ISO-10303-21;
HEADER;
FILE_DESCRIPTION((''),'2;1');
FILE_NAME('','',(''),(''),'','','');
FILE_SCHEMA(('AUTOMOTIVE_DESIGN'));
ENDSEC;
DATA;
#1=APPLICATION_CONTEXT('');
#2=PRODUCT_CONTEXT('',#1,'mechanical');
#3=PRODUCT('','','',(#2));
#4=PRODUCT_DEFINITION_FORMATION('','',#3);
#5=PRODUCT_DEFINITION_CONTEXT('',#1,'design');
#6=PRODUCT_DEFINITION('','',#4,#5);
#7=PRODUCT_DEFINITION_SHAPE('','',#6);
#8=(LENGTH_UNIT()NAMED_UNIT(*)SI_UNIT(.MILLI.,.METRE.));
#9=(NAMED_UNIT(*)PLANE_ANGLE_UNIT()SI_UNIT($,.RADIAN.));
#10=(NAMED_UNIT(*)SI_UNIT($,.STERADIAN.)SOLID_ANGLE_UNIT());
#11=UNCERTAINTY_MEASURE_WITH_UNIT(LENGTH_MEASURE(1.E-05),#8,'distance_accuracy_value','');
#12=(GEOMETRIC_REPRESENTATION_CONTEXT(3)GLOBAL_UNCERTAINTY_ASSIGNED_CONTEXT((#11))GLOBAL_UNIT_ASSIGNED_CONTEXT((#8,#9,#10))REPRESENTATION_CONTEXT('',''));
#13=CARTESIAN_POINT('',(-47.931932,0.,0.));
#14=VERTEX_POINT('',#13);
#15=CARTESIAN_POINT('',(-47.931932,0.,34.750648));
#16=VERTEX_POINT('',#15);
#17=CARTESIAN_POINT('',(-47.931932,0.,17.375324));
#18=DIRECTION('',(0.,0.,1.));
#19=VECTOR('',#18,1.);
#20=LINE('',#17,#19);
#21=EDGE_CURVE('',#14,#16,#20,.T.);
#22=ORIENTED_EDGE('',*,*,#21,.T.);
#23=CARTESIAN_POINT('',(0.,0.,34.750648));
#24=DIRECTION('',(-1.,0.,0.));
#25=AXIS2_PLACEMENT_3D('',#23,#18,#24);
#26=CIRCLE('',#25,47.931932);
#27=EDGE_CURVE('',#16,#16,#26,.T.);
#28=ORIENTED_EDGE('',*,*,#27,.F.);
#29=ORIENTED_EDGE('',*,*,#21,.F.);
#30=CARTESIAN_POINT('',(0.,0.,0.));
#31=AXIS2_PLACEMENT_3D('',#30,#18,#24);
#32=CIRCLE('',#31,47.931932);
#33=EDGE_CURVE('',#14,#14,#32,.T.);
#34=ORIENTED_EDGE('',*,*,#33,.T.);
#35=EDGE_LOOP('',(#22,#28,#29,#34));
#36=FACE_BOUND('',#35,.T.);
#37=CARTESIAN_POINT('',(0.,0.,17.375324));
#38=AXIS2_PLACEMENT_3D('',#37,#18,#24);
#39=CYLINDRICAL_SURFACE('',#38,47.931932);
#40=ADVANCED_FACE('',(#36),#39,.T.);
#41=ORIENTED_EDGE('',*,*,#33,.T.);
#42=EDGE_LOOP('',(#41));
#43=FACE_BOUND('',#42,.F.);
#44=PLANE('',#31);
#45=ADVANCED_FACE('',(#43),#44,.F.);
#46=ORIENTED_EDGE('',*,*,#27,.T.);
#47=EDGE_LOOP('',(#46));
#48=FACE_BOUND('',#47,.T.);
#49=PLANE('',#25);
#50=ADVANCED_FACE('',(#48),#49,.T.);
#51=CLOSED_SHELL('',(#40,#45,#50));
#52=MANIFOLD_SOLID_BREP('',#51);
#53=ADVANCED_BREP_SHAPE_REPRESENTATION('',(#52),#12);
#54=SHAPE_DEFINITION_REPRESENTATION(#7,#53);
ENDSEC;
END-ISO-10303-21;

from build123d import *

# Parameters (mm, degrees)
F0_W = 47.9319319129
F0_H = 34.7506478429


# Not quite as in the source:
# - the program builds the solid bodies; features that only make, move or delete a surface that nothing else refers to are left out


with BuildPart() as f1:
    # F0 (on Front) → F1 (revolve)
    with BuildSketch(Plane.XZ):
        with Locations((-23.9659659564, 17.3753239214)):
            Rectangle(F0_W, F0_H)
    revolve(axis=Axis((0, 0, 17.3753239214), (0, 0, 1)))


solid = f1.part
